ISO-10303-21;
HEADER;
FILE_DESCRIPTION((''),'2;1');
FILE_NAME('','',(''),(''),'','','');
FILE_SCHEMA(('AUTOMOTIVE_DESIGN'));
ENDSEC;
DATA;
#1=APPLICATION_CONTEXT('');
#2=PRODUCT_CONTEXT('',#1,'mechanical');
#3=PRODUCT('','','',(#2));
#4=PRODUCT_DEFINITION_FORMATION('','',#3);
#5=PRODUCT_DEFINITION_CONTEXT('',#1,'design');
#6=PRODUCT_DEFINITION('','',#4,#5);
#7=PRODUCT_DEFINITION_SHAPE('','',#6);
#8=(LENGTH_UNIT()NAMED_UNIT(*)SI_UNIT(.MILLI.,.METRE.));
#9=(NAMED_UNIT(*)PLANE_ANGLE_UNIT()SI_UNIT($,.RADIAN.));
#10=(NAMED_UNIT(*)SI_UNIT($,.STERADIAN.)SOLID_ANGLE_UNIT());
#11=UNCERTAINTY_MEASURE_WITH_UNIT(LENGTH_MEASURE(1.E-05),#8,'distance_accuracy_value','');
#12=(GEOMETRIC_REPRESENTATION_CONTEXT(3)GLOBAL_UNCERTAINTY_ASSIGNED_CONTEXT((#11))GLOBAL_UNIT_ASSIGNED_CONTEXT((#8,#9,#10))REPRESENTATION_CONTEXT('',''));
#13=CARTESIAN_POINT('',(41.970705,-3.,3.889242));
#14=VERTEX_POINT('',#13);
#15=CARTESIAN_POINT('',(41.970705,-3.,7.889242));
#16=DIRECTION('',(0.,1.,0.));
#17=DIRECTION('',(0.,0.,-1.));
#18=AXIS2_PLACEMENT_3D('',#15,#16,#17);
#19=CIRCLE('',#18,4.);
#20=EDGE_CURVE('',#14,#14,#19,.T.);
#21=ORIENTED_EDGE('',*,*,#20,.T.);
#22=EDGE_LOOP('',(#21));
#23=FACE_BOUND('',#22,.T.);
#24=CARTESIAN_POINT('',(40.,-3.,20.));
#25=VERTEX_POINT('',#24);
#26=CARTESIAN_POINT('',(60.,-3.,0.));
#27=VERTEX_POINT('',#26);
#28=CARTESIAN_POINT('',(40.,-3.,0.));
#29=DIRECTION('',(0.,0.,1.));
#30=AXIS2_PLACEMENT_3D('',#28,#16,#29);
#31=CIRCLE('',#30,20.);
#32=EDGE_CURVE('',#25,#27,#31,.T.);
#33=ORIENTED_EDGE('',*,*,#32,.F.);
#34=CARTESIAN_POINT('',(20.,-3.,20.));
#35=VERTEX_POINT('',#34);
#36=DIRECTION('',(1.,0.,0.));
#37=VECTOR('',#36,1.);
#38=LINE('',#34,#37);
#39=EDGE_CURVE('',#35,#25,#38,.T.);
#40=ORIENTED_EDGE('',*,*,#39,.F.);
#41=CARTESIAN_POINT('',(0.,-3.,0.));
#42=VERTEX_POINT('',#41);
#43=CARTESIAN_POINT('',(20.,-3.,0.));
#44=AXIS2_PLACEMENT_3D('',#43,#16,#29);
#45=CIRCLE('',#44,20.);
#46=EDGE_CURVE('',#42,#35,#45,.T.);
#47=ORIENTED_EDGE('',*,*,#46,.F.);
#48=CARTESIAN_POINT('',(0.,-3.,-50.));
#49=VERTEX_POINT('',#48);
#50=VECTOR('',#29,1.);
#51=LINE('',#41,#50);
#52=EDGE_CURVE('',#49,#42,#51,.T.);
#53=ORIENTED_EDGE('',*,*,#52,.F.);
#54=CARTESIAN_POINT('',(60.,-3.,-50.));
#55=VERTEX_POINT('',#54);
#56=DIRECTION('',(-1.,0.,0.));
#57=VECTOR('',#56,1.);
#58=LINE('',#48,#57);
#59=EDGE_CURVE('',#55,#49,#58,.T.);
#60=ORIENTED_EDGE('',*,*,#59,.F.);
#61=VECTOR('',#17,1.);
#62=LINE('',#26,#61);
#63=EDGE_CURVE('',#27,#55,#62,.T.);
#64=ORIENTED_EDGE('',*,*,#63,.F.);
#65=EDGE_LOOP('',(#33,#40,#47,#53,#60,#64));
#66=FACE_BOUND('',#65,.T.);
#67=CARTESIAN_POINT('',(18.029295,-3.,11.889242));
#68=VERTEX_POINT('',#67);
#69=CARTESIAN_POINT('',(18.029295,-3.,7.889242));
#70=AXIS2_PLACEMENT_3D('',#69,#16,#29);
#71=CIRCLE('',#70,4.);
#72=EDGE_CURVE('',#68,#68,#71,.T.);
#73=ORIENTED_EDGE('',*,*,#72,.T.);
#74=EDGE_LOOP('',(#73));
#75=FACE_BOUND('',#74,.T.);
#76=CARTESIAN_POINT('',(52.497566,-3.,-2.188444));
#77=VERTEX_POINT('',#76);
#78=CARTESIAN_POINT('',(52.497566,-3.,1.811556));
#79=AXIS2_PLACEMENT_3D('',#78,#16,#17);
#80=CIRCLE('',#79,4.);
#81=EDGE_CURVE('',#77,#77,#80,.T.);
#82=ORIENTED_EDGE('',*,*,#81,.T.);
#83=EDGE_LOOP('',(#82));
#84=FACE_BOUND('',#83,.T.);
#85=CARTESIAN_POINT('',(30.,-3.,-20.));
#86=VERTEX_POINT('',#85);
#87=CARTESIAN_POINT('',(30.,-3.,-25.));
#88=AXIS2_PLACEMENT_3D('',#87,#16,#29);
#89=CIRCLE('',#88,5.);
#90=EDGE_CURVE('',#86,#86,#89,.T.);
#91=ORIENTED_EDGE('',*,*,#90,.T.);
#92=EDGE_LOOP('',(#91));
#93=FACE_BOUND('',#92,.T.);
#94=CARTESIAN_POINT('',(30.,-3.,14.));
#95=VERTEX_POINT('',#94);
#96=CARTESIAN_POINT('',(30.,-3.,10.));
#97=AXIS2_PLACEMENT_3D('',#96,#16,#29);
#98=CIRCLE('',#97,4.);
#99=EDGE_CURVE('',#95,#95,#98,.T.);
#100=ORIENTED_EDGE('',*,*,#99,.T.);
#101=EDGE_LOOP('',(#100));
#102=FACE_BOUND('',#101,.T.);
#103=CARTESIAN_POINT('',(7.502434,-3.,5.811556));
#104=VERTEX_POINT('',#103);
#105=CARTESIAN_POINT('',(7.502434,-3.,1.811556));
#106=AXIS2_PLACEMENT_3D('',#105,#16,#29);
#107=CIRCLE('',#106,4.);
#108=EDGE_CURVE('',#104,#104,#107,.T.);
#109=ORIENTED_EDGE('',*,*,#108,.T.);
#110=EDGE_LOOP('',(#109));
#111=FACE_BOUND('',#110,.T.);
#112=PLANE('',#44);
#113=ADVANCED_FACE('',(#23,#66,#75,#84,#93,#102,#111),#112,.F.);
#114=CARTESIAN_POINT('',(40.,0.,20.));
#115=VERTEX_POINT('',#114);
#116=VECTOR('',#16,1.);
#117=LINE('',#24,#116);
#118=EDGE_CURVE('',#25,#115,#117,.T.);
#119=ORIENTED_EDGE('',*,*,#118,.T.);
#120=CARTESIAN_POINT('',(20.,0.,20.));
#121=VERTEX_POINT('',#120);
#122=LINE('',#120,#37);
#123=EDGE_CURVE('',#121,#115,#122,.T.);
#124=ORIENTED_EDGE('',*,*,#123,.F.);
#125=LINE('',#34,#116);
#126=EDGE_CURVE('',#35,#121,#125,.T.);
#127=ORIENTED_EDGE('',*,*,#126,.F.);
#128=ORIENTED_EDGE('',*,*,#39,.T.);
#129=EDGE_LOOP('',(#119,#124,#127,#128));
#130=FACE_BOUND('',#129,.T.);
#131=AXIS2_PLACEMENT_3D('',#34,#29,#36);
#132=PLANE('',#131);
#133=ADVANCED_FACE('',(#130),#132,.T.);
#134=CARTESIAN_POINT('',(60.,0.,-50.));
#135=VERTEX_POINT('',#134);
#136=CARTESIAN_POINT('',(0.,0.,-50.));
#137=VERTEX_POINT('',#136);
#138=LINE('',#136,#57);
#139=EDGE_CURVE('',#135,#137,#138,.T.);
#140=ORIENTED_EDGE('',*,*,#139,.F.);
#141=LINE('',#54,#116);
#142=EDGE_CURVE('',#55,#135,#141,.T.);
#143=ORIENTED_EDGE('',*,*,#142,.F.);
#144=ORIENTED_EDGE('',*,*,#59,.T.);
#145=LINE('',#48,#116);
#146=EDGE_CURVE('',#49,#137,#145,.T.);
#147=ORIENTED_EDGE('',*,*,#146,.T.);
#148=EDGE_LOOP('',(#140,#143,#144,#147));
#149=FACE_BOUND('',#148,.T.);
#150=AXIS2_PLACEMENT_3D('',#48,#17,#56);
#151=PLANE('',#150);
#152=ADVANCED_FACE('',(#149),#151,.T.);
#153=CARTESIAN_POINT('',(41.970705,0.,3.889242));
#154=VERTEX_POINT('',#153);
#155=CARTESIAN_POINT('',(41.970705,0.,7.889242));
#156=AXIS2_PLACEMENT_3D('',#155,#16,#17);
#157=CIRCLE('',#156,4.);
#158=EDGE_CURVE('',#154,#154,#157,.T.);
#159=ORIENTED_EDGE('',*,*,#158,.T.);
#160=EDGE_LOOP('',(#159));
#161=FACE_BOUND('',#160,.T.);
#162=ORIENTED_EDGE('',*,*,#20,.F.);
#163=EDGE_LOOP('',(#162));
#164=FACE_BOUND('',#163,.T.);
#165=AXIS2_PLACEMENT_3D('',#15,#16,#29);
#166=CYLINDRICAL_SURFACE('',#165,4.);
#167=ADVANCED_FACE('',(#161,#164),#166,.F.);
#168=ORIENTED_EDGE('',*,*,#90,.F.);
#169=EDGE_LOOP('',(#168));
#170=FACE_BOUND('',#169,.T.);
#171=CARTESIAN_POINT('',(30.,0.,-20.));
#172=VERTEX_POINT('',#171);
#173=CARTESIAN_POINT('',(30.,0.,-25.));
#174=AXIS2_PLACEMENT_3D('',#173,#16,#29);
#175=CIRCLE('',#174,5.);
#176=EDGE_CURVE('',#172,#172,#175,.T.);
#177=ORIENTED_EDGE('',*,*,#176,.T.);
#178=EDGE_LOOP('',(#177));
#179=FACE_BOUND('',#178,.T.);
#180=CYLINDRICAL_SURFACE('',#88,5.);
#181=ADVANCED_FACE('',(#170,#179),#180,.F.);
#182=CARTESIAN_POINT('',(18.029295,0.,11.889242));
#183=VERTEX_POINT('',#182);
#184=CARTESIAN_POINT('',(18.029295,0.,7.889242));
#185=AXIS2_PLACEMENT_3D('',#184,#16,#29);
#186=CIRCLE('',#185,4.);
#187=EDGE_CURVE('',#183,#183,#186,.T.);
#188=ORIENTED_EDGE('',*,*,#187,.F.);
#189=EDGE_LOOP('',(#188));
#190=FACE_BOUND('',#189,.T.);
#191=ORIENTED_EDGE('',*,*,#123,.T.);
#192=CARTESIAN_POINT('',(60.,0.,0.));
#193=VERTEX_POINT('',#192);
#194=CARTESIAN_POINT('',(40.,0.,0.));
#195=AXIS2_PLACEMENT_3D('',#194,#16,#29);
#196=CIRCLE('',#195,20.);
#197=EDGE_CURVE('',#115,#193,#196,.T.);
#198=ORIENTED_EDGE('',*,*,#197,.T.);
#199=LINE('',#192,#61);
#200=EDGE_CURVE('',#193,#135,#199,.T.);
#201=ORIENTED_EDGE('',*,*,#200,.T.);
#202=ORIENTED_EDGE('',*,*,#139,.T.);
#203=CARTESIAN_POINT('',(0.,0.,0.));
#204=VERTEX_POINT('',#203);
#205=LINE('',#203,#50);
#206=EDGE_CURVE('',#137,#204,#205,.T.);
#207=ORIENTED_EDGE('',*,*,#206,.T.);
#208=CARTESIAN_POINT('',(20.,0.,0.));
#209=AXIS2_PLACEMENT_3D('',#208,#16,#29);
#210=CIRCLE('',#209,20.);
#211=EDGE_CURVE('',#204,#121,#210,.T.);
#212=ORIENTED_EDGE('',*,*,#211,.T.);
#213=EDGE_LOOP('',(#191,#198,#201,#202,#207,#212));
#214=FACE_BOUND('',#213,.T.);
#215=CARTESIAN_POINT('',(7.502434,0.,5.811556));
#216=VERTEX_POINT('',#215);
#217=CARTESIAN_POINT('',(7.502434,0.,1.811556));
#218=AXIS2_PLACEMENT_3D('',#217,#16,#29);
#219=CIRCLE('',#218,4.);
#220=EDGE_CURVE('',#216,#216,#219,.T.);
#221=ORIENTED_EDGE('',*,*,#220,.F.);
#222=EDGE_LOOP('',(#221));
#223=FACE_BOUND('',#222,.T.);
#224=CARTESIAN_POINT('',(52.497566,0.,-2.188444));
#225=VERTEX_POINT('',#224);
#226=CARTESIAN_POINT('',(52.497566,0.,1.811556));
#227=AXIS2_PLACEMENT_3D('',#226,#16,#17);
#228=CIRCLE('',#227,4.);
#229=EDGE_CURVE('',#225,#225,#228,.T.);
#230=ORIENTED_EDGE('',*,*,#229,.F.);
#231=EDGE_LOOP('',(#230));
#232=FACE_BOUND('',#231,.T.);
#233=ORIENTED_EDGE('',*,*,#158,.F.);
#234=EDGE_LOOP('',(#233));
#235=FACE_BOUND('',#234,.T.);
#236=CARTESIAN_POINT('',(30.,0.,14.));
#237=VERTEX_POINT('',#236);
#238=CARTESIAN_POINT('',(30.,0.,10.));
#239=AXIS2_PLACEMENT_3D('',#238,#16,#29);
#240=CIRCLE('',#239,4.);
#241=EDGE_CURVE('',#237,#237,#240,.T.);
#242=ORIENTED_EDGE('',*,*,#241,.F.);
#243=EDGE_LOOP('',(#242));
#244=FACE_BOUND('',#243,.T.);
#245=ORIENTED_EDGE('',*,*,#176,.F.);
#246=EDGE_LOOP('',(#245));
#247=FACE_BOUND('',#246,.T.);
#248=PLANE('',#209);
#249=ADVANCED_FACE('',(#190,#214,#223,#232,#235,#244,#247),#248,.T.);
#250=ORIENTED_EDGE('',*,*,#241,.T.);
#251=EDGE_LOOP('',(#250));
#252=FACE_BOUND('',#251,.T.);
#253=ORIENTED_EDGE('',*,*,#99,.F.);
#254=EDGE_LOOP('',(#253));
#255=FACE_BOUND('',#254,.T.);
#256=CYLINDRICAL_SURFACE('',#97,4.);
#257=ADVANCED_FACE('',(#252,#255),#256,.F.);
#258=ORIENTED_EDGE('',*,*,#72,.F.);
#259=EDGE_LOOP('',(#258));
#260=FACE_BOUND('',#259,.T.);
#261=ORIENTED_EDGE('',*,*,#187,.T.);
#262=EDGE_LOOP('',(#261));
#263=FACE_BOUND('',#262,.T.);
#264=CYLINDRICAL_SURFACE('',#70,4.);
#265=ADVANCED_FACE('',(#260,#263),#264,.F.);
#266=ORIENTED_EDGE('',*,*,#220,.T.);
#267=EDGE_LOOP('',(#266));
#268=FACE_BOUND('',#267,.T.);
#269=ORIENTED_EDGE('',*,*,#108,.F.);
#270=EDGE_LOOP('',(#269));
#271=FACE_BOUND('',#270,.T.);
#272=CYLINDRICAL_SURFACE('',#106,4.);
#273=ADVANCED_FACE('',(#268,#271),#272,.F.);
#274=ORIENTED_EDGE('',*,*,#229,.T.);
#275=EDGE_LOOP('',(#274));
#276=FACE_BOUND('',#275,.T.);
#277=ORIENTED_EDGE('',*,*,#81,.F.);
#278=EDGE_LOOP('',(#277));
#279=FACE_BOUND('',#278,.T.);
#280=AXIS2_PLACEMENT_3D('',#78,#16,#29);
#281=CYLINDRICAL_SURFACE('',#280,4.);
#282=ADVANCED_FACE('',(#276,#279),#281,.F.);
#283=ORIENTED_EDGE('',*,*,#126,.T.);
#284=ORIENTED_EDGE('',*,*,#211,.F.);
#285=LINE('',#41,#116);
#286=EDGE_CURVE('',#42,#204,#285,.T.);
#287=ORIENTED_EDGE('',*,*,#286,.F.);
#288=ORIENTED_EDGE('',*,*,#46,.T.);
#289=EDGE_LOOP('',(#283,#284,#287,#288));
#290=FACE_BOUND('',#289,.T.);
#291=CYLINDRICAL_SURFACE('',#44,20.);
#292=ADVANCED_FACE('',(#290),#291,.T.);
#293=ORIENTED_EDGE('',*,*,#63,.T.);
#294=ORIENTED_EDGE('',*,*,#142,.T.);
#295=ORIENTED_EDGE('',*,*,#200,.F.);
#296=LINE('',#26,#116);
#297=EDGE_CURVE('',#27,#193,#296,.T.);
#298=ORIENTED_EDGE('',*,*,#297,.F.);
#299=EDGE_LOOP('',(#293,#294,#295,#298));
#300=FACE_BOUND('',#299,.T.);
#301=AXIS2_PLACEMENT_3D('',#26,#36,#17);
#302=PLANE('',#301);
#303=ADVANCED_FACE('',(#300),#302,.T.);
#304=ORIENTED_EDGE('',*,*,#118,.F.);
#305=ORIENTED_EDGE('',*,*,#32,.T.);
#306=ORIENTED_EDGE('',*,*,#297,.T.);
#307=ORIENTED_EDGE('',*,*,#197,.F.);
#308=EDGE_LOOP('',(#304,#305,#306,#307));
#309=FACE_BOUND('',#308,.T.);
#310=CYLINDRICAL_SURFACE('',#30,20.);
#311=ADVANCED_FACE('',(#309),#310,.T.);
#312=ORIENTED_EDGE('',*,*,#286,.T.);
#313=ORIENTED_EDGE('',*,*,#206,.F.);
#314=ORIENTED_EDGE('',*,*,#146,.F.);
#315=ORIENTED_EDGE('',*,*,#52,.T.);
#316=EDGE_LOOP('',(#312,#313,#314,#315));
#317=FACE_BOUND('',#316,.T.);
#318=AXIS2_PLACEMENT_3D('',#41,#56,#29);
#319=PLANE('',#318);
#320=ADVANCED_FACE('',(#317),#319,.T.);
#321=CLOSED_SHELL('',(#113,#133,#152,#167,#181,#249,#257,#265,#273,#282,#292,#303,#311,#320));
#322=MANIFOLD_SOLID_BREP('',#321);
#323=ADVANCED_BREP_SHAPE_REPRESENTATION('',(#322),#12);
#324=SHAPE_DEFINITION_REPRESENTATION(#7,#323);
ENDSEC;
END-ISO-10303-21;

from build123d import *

# Parameters (mm, degrees)
ESBO_O1_R          = 4
ESBO_O1_R_2        = 5
FLANGE_BASE1_DEPTH = 3


# Sheet-metal steps are written as plain solids
with BuildPart() as part:
    # Esboço1 → Flange-base1 (new body)
    with BuildSketch(Plane(origin=(0, 0, 0), x_dir=(1, 0, 0), z_dir=(0, 1, 0))):
        with BuildLine():
            Line((0, 0), (0, 50))
            Line((0, 50), (60, 50))
            Line((60, 50), (60, 0))
            ThreePointArc((60, 0), (54.142135624, -14.142135624), (40, -20))
            Line((40, -20), (20, -20))
            ThreePointArc((20, -20), (5.857864376, -14.142135624), (0, 0))
        make_face()
        with Locations(Location((30, -10, 0), (0, 0, 270))):
            Circle(ESBO_O1_R, mode=Mode.SUBTRACT)
        with Locations(Location((18.029294984, -7.889241728, 0), (0, 0, 270))):
            Circle(ESBO_O1_R, mode=Mode.SUBTRACT)
        with Locations(Location((7.502433661, -1.811555509, 0), (0, 0, 270))):
            Circle(ESBO_O1_R, mode=Mode.SUBTRACT)
        with Locations(Location((52.497566339, -1.811555509, 0), (0, 0, 90))):
            Circle(ESBO_O1_R, mode=Mode.SUBTRACT)
        with Locations(Location((41.970705016, -7.889241728, 0), (0, 0, 90))):
            Circle(ESBO_O1_R, mode=Mode.SUBTRACT)
        with Locations(Location((30, 25, 0), (0, 0, 270))):
            Circle(ESBO_O1_R_2, mode=Mode.SUBTRACT)
    extrude(amount=-FLANGE_BASE1_DEPTH)


solid = part.part
